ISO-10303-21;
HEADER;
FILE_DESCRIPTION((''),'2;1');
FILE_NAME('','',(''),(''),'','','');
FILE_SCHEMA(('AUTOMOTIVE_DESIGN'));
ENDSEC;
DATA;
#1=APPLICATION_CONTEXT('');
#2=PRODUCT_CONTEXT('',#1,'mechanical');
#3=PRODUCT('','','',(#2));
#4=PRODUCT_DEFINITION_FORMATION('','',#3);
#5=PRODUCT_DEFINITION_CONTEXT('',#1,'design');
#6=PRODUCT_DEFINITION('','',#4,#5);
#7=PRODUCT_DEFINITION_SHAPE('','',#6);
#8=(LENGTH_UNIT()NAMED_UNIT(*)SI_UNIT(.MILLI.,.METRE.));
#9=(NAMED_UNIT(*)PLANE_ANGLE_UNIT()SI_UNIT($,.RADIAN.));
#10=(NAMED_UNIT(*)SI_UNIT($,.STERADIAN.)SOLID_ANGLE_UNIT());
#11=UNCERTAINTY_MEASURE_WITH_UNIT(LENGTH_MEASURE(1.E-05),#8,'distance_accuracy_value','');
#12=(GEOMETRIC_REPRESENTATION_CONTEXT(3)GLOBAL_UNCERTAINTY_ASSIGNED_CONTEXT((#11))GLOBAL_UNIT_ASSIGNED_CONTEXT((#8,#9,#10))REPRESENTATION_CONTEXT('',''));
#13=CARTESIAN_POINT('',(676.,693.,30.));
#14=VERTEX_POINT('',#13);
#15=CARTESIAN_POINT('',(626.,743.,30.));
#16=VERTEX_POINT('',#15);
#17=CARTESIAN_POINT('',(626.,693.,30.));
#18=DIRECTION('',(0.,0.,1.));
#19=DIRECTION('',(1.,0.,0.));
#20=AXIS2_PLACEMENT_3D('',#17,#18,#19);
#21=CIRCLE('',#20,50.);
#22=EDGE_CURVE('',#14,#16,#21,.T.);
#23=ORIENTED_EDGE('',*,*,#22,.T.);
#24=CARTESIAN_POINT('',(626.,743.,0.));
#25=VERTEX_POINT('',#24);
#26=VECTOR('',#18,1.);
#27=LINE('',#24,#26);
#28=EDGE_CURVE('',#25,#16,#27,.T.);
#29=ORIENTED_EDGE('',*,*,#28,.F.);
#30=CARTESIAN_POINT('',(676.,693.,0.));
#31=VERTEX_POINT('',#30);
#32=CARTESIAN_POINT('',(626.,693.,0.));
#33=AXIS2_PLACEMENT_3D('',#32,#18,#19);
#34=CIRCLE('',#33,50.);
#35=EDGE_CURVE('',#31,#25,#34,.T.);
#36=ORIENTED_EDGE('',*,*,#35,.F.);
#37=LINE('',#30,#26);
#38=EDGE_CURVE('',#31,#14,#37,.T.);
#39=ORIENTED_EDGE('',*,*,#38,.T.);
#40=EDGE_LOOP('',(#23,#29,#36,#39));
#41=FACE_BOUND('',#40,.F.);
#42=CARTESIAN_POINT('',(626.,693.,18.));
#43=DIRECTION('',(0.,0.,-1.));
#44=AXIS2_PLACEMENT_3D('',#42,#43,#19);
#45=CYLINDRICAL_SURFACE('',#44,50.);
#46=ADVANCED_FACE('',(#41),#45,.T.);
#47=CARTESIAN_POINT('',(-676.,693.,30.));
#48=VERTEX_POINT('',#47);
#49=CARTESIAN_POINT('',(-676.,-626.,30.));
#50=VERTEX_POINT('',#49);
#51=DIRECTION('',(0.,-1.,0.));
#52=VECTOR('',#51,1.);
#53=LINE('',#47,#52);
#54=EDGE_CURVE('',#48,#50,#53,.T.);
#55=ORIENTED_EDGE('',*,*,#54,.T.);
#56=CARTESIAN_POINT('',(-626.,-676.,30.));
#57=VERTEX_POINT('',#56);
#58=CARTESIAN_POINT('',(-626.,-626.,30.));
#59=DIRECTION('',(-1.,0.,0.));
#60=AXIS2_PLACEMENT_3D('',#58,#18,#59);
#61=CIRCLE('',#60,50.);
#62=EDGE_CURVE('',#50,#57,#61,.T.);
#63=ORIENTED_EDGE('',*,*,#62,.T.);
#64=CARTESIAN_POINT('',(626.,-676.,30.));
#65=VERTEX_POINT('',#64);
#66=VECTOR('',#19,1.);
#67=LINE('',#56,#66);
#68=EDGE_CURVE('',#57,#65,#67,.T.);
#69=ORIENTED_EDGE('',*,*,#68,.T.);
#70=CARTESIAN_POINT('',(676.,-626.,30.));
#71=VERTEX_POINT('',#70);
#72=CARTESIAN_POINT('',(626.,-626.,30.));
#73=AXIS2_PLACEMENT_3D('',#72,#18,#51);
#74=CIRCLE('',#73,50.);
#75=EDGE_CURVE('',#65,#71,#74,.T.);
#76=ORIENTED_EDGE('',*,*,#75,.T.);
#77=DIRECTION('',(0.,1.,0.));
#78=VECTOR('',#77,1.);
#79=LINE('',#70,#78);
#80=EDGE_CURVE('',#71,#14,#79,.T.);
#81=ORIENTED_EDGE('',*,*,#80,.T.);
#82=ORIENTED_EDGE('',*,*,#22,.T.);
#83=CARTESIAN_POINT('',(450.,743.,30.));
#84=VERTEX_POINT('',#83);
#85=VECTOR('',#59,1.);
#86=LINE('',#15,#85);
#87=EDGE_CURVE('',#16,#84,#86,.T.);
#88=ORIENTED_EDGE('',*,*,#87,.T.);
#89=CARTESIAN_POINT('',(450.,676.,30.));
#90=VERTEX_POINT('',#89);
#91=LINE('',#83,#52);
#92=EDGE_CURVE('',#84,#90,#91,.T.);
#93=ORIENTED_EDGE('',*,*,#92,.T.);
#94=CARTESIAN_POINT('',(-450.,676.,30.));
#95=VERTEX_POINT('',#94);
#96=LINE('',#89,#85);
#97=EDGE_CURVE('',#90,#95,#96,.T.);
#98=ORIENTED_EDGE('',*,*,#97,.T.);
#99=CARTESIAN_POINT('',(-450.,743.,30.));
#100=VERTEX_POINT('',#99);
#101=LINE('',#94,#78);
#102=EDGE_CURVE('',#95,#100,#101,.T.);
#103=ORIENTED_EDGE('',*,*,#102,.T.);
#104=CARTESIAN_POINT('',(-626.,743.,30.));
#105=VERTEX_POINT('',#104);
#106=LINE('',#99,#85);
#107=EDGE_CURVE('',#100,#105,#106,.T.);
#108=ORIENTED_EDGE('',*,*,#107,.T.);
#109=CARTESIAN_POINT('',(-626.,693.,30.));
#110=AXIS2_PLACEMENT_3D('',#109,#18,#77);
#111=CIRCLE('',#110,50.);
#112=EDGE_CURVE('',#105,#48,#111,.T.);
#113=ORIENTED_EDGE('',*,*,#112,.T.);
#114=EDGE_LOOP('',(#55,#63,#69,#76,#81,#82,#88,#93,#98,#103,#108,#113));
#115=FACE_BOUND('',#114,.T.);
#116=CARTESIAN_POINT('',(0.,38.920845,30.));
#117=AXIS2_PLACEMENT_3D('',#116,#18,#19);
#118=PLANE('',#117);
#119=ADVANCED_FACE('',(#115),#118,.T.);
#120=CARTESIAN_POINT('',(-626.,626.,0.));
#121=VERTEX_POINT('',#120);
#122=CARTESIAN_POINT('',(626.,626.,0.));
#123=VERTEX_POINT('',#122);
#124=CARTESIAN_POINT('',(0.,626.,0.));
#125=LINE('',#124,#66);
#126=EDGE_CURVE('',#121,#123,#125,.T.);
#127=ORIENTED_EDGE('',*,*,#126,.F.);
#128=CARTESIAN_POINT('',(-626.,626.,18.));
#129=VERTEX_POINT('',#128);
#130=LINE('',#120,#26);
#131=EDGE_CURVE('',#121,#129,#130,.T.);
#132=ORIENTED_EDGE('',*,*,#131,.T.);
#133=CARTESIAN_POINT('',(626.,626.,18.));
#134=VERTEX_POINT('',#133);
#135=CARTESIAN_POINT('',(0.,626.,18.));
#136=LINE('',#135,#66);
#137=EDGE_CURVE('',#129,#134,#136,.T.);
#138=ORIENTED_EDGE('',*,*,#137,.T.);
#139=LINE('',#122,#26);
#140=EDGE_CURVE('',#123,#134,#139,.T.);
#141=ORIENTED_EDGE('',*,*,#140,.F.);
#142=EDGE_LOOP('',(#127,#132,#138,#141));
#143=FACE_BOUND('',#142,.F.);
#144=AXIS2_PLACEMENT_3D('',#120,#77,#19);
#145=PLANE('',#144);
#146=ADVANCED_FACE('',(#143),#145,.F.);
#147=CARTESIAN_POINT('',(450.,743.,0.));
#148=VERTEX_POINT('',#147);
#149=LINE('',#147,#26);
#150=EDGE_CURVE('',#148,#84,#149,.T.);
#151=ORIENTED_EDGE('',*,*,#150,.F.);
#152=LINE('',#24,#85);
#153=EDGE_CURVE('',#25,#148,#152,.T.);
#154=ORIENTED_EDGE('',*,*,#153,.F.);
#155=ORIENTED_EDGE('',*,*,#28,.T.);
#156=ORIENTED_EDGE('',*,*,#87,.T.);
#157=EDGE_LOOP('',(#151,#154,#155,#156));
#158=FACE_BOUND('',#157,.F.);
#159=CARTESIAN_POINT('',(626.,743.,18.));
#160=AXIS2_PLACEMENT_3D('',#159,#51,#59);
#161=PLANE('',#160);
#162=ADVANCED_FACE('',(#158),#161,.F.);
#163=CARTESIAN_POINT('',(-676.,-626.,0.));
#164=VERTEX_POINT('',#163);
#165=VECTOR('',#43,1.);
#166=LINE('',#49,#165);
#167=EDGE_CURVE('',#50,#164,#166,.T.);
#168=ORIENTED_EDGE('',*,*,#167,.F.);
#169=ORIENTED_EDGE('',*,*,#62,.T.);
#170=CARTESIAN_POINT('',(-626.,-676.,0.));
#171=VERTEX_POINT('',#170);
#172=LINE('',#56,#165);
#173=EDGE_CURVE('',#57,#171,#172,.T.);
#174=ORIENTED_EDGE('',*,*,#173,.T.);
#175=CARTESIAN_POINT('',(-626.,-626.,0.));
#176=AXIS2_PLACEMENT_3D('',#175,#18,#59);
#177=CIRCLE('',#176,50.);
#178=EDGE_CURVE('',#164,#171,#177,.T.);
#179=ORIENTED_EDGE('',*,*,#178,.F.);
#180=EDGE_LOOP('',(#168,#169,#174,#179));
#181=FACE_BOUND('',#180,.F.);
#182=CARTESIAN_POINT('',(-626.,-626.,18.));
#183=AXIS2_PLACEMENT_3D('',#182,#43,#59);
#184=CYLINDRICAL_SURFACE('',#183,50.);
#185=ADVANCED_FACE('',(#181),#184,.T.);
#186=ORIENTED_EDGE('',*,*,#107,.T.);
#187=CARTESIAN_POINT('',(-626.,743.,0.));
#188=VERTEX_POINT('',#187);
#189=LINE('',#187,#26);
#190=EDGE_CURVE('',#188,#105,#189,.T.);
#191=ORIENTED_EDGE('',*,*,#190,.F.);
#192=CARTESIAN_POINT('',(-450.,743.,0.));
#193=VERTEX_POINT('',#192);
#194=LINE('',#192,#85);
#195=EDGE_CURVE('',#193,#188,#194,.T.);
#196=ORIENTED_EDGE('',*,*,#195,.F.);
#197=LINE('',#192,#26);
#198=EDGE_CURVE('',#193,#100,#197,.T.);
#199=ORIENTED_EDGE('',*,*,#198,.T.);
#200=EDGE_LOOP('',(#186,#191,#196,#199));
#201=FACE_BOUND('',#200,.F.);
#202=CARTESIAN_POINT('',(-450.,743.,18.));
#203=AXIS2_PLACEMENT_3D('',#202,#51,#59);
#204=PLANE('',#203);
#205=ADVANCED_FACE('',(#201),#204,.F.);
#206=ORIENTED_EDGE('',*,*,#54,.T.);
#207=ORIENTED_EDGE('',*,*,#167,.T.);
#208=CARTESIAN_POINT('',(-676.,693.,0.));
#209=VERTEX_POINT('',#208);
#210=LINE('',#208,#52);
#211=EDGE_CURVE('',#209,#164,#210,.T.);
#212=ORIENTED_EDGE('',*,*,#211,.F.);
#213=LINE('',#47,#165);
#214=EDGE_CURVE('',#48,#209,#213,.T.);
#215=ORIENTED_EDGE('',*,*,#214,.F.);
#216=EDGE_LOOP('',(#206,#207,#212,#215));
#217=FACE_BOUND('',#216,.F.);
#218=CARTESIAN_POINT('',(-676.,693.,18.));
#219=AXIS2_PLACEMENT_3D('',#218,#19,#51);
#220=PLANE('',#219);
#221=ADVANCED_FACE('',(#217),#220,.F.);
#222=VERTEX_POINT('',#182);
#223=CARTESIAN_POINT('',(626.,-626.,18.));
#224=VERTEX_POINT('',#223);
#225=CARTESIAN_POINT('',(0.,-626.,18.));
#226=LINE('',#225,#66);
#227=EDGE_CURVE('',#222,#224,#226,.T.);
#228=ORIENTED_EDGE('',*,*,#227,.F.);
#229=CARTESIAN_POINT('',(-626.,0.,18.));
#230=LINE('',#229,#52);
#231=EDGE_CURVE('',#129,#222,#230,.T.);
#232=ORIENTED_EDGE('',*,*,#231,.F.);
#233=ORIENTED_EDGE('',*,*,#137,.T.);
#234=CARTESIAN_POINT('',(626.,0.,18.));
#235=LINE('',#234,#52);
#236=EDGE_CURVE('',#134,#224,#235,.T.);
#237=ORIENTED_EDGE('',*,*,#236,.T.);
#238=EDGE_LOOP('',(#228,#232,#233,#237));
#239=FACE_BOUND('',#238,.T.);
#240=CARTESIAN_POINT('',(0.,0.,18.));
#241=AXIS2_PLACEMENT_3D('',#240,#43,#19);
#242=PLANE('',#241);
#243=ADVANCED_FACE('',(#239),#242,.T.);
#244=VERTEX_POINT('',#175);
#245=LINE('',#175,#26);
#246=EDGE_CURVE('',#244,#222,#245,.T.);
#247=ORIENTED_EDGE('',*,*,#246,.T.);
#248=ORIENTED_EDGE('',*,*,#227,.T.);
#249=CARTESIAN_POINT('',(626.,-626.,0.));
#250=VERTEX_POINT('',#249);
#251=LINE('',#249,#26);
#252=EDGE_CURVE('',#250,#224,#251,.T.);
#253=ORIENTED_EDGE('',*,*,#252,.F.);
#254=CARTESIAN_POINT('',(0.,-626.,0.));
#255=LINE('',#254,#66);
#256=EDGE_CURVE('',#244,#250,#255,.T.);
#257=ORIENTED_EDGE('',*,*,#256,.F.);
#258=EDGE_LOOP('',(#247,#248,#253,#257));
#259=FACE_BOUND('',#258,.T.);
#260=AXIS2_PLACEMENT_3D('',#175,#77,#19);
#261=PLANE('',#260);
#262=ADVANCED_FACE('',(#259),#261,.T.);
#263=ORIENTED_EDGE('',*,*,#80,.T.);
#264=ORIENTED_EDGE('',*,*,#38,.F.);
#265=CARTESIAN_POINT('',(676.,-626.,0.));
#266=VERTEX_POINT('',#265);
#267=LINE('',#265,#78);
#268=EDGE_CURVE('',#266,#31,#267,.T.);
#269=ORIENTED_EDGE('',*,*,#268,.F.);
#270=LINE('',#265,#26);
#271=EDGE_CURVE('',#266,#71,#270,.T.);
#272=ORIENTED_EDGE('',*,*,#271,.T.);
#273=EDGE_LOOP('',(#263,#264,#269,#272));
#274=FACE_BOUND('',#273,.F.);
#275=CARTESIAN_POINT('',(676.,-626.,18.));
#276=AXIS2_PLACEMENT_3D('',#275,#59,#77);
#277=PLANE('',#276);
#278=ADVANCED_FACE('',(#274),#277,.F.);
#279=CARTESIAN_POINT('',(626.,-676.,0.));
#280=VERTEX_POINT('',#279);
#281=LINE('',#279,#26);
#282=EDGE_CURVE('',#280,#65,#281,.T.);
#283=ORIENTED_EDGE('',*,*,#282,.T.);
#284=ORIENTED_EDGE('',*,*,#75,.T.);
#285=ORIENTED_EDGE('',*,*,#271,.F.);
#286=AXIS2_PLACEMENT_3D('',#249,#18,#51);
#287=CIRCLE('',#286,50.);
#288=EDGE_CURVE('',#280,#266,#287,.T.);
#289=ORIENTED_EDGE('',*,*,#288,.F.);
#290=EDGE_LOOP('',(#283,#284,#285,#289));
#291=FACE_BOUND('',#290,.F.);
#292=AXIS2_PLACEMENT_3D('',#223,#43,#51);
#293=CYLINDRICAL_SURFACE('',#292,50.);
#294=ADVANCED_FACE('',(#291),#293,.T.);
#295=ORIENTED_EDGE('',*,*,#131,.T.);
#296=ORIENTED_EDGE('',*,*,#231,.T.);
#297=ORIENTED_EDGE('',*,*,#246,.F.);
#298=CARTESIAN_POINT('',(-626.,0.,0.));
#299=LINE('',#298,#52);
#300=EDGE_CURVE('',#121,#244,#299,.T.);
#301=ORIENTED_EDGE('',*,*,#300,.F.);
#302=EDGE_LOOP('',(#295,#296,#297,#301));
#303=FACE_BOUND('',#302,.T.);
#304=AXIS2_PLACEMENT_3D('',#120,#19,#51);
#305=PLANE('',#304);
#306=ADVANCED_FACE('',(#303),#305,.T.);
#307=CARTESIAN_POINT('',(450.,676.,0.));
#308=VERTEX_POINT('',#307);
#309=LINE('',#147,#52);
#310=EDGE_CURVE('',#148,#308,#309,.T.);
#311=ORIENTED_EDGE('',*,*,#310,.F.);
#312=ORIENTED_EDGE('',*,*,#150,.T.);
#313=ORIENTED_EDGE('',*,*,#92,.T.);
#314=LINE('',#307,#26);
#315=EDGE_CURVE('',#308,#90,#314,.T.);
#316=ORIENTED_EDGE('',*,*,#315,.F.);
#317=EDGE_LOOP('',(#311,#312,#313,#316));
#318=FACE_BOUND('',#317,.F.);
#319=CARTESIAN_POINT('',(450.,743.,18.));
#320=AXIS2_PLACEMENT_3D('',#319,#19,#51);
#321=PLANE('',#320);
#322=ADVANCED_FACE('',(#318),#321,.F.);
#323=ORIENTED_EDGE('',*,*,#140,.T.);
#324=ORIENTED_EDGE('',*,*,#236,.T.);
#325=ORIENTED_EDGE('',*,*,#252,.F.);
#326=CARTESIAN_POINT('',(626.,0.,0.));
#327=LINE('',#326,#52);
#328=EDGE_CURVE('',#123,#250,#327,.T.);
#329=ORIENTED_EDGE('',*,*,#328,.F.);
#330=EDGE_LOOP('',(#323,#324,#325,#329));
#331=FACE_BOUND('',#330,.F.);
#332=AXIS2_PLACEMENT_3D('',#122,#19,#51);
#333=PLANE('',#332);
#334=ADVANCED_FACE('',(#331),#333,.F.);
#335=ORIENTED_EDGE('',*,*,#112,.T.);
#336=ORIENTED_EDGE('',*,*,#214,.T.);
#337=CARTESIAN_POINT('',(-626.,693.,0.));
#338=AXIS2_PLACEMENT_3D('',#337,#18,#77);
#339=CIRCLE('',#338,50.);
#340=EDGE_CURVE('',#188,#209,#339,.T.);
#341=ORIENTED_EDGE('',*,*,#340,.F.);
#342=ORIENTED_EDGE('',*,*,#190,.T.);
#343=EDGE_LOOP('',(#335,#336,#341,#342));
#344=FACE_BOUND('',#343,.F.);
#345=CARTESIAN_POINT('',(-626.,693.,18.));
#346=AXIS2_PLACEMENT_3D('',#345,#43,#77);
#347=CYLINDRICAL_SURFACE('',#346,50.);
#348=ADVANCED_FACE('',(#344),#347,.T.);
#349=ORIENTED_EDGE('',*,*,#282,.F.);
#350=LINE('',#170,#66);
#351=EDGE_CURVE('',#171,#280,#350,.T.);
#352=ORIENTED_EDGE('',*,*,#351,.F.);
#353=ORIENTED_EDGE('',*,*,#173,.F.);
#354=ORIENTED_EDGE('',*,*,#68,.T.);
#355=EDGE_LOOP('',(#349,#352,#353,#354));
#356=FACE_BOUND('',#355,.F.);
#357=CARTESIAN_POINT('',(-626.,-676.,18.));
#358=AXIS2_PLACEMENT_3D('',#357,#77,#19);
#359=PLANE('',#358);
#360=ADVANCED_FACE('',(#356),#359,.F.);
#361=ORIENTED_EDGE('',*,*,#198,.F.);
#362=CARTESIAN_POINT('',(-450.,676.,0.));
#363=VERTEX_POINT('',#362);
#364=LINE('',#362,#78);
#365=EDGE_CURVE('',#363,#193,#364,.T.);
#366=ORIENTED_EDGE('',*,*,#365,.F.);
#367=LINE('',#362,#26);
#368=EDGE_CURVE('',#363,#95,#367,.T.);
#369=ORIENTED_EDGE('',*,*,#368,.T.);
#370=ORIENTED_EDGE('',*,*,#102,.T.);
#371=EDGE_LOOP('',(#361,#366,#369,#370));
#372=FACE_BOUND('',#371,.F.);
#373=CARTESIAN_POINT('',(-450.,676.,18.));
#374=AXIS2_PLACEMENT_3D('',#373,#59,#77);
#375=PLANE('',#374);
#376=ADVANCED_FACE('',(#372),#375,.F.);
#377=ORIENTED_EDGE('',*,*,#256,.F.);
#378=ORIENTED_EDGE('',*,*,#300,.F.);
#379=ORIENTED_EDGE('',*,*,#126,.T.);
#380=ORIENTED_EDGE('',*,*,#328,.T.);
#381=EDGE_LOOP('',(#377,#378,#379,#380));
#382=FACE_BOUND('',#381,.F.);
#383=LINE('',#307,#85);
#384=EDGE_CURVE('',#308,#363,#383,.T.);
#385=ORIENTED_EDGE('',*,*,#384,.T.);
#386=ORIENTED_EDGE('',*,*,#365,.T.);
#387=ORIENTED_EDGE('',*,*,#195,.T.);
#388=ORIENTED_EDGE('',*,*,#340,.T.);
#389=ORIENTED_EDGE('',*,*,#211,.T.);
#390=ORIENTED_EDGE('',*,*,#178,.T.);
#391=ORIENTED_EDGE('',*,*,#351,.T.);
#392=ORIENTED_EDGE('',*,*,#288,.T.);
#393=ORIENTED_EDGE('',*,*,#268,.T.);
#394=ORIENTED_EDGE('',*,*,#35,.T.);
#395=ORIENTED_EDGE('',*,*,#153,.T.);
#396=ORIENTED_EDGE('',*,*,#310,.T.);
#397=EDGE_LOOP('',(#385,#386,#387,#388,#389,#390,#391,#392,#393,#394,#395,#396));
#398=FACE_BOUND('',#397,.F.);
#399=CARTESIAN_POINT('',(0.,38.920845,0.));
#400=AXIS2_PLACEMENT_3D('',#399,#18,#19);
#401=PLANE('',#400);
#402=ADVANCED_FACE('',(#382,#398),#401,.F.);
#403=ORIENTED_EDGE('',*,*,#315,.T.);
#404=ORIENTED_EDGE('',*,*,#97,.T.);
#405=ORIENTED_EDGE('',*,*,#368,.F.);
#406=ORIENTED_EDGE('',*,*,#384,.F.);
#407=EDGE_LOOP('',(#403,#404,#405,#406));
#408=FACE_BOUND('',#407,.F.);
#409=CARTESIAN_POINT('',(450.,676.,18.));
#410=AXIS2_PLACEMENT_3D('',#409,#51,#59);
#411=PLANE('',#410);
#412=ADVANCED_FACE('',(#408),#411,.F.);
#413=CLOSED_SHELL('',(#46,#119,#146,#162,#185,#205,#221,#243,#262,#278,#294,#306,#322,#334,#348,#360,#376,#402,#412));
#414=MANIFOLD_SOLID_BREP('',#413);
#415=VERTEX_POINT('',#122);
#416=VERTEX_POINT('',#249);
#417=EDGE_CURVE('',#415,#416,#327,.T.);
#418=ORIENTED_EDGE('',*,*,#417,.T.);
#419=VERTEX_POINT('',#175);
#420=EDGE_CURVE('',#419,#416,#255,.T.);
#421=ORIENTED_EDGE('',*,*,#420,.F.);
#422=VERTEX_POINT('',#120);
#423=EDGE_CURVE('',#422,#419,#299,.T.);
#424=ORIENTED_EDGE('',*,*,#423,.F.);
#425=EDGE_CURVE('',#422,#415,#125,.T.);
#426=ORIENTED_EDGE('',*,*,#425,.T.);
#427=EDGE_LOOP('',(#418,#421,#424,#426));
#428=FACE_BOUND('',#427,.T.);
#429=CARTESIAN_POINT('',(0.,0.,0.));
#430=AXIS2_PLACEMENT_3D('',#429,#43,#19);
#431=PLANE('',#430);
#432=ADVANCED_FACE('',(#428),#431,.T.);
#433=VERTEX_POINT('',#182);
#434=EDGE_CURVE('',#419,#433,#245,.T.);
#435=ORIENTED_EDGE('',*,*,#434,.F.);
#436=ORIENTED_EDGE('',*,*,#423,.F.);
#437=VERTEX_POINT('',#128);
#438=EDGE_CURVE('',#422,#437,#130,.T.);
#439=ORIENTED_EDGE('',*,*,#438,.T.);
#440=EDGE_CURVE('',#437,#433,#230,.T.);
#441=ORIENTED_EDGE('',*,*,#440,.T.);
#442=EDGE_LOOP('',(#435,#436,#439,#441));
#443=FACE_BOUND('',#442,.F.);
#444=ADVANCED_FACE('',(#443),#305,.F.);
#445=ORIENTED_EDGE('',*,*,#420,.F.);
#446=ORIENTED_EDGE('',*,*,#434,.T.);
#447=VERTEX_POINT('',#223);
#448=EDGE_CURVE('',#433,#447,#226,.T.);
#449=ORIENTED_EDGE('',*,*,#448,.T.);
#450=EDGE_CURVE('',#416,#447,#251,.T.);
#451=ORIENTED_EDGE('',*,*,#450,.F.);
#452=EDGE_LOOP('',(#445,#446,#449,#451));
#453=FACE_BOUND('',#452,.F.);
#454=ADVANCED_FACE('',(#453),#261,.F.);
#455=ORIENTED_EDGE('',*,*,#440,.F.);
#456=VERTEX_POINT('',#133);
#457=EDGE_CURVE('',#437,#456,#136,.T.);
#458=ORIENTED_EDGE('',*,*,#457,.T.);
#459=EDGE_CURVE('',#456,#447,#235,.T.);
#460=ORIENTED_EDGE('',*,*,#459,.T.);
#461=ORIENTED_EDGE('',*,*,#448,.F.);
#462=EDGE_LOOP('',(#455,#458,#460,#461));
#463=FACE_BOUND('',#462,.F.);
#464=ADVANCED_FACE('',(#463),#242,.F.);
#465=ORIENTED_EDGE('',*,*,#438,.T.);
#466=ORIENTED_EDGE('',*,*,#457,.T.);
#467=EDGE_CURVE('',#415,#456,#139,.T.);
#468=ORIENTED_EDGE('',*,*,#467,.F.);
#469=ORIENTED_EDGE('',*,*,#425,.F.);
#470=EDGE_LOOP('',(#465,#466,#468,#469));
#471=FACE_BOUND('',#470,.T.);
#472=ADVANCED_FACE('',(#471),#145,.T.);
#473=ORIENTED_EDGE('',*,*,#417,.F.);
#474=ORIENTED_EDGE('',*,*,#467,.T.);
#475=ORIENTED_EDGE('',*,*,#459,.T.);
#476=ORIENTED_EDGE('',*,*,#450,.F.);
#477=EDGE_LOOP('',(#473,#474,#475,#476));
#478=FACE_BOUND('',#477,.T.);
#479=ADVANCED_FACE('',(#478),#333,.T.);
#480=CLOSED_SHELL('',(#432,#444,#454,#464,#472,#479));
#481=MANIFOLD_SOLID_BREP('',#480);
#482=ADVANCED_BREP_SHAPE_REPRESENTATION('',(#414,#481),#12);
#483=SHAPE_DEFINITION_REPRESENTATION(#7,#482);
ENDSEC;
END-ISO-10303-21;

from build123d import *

# Parameters (mm, degrees)
F1_DEPTH = 18
F2_DEPTH = 12
F3_W     = 1252
F3_H     = 1252
F4_DEPTH = 18


with BuildPart() as f1:
    # F0 (on Top) → F1 (new body)
    with BuildSketch(Plane.XY):
        with BuildLine():
            Line((-626, -676), (626, -676))
            ThreePointArc((626, -676), (661.3553390593, -661.3553390593), (676, -626))
            Line((676, -626), (676, 626))
            Line((676, 626), (676, 693))
            ThreePointArc((676, 693), (661.3553390593, 728.3553390593), (626, 743))
            Line((626, 743), (450, 743))
            Line((450, 743), (450, 676))
            Line((450, 676), (-450, 676))
            Line((-450, 676), (-450, 743))
            Line((-450, 743), (-626, 743))
            ThreePointArc((-626, 743), (-661.3553390593, 728.3553390593), (-676, 693))
            Line((-676, 693), (-676, 626))
            Line((-676, 626), (-676, -626))
            ThreePointArc((-676, -626), (-661.3553390593, -661.3553390593), (-626, -676))
        make_face()
    extrude(amount=F1_DEPTH)

    # F2 (add): a face of the model
    f2_faces = [f1.faces().sort_by_distance(p)[0] for p in [
        (0, 11.5377812553, 18),
    ]]
    extrude(f2_faces, amount=F2_DEPTH)


with BuildPart() as f4:
    # F3 (on face) → F4 (new body)
    with BuildSketch(Plane(origin=(0, 0, 0), x_dir=(1, 0, 0), z_dir=(0, 0, -1))):
        Rectangle(F3_W, F3_H)
    extrude(amount=-F4_DEPTH)


with BuildPart() as f1_1:
    add(f1.part)

    # F5: cut F4
    add(f4.part, mode=Mode.SUBTRACT)


solid = Compound([f4.part, f1_1.part])
